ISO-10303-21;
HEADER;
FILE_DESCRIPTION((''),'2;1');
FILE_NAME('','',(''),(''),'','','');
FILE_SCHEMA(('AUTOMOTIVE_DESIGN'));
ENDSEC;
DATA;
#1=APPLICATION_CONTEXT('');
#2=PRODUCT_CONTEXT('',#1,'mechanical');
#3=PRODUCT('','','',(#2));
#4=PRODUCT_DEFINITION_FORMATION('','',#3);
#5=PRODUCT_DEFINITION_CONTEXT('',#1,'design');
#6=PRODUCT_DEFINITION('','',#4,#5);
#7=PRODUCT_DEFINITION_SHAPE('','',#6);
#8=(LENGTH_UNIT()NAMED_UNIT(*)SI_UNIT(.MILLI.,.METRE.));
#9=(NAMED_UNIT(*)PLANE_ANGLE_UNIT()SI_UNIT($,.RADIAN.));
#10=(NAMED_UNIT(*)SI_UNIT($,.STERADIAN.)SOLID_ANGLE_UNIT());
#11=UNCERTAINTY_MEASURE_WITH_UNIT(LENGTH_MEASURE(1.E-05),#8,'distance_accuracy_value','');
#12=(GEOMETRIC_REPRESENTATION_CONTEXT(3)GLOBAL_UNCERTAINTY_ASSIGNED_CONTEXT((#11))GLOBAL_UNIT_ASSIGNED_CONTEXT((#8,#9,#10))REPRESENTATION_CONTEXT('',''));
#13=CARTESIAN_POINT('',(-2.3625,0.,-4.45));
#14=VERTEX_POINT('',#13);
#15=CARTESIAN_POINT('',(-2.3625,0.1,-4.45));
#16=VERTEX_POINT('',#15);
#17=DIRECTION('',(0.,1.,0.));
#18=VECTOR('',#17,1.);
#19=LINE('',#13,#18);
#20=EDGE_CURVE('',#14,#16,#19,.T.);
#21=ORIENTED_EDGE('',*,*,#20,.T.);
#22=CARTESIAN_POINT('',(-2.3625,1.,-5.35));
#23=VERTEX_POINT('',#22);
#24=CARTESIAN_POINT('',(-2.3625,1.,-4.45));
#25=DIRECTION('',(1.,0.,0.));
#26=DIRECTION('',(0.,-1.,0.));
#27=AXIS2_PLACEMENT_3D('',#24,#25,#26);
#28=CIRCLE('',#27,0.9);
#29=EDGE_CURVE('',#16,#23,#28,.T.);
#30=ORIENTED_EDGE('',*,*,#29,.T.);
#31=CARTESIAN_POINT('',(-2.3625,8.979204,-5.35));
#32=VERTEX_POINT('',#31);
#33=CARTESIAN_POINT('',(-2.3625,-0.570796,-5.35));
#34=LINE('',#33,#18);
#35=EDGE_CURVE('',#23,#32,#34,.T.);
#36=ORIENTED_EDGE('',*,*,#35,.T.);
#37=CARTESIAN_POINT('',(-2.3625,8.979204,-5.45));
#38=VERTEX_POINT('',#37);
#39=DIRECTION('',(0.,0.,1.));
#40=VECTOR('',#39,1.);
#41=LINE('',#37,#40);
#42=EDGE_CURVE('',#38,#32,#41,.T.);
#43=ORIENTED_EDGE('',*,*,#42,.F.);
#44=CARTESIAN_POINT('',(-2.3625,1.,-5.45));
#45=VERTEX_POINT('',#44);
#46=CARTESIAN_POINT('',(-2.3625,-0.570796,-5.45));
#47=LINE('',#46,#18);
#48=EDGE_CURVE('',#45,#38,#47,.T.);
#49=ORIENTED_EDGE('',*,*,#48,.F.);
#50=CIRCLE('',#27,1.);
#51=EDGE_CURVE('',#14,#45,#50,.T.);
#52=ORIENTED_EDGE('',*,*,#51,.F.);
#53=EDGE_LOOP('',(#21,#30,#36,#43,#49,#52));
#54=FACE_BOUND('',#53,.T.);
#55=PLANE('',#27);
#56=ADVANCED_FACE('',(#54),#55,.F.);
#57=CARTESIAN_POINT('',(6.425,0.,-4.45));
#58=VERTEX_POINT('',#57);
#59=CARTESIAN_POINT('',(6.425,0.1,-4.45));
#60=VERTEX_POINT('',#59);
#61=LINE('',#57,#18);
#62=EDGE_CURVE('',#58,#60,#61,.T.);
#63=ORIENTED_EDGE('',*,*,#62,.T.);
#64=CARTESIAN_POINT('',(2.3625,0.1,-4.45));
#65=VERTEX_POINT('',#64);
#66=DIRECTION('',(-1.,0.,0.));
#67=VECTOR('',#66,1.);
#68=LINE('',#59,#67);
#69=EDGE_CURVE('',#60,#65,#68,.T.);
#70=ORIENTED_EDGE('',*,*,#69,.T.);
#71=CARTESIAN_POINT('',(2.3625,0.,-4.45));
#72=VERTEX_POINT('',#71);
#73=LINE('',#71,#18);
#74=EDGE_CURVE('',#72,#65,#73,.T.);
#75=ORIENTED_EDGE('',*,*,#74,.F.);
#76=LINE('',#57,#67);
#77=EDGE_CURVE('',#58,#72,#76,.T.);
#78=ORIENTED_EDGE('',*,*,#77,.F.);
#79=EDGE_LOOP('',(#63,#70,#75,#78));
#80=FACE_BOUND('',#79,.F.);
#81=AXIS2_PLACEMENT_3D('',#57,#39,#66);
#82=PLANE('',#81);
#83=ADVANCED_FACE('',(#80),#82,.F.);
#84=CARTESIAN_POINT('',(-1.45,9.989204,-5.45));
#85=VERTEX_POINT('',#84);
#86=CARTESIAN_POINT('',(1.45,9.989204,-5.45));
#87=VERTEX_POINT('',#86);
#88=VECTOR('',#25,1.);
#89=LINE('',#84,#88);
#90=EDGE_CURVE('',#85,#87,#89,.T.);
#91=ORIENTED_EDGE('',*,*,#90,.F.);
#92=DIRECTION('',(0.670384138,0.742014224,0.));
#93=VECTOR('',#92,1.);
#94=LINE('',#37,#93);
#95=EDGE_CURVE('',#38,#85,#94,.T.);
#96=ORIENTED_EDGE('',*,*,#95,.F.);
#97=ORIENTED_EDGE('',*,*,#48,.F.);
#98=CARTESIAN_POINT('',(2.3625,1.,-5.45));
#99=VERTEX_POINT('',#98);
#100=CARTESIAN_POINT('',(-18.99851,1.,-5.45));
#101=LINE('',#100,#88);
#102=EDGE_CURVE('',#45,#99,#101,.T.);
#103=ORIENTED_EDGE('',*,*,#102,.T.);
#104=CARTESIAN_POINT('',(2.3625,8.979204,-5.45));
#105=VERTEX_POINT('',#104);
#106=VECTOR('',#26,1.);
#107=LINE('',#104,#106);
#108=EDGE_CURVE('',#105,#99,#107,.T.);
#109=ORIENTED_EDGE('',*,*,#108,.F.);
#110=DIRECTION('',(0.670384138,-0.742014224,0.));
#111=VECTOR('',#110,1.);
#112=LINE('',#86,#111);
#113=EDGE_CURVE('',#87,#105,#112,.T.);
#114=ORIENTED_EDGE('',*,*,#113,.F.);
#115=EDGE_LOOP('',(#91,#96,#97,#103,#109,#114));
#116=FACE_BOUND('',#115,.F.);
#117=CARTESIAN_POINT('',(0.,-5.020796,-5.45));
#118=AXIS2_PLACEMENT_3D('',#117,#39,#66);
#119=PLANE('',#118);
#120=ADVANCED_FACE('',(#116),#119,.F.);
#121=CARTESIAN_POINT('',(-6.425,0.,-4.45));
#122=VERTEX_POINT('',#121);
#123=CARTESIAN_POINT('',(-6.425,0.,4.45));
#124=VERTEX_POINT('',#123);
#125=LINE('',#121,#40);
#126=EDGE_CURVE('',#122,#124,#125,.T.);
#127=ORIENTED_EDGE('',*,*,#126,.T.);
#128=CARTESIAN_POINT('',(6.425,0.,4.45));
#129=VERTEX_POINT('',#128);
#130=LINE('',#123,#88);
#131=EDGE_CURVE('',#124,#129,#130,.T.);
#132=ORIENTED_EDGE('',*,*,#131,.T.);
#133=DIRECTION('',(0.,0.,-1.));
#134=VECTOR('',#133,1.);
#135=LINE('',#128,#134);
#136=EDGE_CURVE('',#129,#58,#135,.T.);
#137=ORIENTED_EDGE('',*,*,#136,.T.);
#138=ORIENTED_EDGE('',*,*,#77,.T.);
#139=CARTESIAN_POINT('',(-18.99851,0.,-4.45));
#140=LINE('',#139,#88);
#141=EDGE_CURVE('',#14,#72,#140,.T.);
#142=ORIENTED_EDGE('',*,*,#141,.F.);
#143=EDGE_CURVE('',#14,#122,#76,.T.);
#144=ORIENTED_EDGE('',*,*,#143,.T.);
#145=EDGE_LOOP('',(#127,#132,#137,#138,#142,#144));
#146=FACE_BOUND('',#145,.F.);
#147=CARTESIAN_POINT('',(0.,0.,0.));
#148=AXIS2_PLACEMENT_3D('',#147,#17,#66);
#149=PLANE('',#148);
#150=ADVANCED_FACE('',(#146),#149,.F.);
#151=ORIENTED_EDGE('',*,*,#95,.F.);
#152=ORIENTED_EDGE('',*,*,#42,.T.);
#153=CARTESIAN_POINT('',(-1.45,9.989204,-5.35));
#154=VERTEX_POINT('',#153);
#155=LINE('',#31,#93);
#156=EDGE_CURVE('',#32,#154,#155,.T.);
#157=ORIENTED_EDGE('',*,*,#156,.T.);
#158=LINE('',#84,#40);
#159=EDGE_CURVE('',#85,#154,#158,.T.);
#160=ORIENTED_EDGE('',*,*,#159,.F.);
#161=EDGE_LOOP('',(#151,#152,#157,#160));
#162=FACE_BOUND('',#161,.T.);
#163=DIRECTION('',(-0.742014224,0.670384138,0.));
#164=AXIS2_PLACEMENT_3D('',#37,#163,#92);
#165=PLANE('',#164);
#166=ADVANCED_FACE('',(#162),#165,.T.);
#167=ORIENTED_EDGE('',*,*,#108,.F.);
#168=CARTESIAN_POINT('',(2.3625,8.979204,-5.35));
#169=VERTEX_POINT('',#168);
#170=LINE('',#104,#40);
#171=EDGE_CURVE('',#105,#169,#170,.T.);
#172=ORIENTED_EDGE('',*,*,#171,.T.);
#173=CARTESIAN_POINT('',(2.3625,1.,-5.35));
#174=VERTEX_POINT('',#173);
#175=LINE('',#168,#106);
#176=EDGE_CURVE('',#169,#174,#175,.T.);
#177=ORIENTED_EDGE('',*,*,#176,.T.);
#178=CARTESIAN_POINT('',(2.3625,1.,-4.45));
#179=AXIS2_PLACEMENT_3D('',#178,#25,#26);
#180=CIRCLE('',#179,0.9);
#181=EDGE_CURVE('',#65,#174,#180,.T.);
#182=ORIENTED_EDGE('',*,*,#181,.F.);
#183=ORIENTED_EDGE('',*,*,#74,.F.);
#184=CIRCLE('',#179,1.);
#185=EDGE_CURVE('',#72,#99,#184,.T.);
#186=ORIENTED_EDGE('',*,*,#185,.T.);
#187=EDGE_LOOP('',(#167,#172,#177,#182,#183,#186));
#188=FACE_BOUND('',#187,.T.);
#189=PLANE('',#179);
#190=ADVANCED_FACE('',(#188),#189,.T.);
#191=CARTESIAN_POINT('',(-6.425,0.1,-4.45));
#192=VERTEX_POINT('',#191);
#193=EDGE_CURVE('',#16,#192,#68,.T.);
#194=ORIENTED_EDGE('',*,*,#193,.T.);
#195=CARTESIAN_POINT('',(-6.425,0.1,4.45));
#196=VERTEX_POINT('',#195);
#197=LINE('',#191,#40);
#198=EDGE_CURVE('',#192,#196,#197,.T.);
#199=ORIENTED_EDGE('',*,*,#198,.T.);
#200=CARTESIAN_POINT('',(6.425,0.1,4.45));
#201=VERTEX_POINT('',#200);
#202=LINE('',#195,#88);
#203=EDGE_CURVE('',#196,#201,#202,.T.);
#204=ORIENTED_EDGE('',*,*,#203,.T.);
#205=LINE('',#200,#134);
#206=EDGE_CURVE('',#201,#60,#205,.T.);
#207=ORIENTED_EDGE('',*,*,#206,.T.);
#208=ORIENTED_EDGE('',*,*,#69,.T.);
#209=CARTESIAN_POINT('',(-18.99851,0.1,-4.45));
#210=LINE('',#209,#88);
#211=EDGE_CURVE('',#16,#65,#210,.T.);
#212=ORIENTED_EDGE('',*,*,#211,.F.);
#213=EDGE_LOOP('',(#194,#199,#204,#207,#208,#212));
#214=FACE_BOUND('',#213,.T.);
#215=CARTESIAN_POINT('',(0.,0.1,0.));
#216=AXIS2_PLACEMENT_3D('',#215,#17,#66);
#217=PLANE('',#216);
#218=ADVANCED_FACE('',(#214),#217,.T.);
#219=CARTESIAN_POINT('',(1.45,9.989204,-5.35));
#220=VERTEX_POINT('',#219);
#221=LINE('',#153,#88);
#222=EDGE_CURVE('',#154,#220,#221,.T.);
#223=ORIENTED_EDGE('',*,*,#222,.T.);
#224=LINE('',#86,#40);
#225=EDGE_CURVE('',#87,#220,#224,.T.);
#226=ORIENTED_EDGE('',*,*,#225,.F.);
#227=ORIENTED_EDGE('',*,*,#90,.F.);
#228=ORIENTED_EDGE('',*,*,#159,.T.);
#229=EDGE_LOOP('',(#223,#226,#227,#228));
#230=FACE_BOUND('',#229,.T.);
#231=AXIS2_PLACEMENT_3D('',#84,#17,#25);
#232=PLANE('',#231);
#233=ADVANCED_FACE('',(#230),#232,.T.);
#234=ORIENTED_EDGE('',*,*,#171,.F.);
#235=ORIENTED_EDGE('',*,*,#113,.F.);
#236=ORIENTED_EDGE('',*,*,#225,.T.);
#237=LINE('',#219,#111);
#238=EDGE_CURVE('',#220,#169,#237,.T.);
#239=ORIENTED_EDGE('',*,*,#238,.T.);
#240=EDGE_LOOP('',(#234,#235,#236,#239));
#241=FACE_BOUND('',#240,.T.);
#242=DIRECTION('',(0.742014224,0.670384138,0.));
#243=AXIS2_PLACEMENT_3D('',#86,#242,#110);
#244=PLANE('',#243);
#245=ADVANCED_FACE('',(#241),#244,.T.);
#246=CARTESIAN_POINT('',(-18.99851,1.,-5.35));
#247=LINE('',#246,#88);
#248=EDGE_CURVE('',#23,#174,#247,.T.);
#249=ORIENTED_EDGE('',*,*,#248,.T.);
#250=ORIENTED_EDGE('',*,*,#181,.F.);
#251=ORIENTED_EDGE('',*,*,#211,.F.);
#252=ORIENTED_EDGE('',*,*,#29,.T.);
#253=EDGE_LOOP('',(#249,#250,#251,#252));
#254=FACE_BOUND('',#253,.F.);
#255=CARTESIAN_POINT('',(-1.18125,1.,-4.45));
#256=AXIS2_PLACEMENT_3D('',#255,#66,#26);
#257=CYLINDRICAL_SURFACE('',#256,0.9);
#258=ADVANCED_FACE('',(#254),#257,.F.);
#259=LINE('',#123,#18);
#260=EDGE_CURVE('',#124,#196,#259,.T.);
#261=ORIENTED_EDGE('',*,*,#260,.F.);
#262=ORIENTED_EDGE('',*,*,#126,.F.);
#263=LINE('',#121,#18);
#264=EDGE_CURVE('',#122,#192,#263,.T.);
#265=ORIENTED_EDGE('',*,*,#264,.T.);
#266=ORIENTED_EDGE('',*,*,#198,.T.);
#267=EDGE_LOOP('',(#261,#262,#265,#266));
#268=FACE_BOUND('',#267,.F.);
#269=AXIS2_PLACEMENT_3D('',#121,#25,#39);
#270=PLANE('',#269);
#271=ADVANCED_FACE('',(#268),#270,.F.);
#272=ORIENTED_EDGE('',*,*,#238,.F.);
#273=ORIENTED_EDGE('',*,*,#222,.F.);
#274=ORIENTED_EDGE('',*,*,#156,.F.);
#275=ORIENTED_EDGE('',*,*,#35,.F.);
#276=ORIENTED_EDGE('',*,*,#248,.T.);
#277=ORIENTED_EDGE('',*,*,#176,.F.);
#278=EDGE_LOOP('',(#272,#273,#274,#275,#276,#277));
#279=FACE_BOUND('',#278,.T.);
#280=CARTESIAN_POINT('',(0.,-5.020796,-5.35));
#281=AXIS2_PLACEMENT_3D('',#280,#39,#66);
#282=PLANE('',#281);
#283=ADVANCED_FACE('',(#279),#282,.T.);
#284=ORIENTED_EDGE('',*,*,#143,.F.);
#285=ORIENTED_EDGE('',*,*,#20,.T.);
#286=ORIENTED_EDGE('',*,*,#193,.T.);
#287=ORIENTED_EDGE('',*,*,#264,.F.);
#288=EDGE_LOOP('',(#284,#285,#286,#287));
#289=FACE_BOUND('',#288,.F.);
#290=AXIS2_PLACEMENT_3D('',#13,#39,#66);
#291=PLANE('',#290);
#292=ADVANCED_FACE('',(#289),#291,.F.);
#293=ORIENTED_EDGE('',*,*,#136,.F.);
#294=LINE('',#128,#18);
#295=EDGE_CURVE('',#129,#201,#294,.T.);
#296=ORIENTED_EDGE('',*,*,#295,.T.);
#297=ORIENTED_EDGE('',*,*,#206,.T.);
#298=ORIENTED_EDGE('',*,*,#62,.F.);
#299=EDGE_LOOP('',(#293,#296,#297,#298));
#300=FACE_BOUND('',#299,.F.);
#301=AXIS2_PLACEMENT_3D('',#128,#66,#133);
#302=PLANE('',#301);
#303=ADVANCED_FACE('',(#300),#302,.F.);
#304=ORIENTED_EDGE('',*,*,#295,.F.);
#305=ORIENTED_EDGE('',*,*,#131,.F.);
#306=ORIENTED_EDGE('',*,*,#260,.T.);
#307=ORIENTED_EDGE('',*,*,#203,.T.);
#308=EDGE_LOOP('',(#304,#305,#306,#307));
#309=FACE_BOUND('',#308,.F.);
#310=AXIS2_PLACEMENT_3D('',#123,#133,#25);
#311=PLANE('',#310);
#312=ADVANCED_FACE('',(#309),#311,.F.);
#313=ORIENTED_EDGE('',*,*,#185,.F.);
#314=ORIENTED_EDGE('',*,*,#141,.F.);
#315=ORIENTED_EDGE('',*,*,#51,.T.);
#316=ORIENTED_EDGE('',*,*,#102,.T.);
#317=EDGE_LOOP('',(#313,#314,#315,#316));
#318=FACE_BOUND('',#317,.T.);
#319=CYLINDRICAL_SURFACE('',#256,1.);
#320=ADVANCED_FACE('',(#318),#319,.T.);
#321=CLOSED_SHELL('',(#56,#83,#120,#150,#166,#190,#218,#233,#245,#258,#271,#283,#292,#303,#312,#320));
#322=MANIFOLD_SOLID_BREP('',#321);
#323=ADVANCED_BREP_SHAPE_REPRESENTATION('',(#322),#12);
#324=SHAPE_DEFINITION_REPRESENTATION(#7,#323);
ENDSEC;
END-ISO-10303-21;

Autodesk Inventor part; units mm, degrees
ref_plane "YZ Plane" through (0, 0, 0) normal (1, 0, 0) x (0, 1, 0)
ref_plane "XZ Plane" through (0, 0, 0) normal (0, 1, 0) x (-1, 0, 0)
ref_plane "XY Plane" through (0, 0, 0) normal (0, 0, 1) x (1, 0, 0)
sketch "Sketch1" plane through (0, 0, 0) normal (0, 1, 0) x (-1, 0, 0)
  line L0 (-6.425, -4.45) -> (6.425, -4.45)
  line L1 (6.425, -4.45) -> (6.425, 4.45)
  line L2 (6.425, 4.45) -> (-6.425, 4.45)
  line L3 (-6.425, 4.45) -> (-6.425, -4.45)
  line L4 (-6.425, -4.45) -> (6.425, 4.45) construction
  line L5 (6.425, -4.45) -> (-6.425, 4.45) construction
  line L6 (-2.3625, -4.45) -> (2.3625, -4.45)
  line L7 (2.3625, -4.45) -> (2.3625, -14)
  line L8 (-2.3625, -14) -> (-2.3625, -4.45)
  line L9 (1.45, -15.01) -> (-1.45, -15.01)
  line L10 (2.3625, -14) -> (1.45, -15.01)
  line L11 (-1.45, -15.01) -> (-2.3625, -14)
extrude "Extrusion1" add sketch "Sketch1" along normal blind 0.1
sketch "Sketch2" plane through (0, 0, 0) normal (0, -1, 0) x (1, 0, 0)
  line L0 (-2.3625, -4.45) -> (2.3625, -4.45)
  line L1 (-2.3625, -5.45) -> (2.3625, -5.45)
  point P0 (0, 0)
  dimension "d2" = 1
bend part "Bend Part1" radius 1 angle 90 line through (-2.3625, 0, -4.45) along (1, 0, 0) centre toward (0, 1, 0) moving side (0, 0, -1) both sides no
properties part number "ECoG64Ch"
